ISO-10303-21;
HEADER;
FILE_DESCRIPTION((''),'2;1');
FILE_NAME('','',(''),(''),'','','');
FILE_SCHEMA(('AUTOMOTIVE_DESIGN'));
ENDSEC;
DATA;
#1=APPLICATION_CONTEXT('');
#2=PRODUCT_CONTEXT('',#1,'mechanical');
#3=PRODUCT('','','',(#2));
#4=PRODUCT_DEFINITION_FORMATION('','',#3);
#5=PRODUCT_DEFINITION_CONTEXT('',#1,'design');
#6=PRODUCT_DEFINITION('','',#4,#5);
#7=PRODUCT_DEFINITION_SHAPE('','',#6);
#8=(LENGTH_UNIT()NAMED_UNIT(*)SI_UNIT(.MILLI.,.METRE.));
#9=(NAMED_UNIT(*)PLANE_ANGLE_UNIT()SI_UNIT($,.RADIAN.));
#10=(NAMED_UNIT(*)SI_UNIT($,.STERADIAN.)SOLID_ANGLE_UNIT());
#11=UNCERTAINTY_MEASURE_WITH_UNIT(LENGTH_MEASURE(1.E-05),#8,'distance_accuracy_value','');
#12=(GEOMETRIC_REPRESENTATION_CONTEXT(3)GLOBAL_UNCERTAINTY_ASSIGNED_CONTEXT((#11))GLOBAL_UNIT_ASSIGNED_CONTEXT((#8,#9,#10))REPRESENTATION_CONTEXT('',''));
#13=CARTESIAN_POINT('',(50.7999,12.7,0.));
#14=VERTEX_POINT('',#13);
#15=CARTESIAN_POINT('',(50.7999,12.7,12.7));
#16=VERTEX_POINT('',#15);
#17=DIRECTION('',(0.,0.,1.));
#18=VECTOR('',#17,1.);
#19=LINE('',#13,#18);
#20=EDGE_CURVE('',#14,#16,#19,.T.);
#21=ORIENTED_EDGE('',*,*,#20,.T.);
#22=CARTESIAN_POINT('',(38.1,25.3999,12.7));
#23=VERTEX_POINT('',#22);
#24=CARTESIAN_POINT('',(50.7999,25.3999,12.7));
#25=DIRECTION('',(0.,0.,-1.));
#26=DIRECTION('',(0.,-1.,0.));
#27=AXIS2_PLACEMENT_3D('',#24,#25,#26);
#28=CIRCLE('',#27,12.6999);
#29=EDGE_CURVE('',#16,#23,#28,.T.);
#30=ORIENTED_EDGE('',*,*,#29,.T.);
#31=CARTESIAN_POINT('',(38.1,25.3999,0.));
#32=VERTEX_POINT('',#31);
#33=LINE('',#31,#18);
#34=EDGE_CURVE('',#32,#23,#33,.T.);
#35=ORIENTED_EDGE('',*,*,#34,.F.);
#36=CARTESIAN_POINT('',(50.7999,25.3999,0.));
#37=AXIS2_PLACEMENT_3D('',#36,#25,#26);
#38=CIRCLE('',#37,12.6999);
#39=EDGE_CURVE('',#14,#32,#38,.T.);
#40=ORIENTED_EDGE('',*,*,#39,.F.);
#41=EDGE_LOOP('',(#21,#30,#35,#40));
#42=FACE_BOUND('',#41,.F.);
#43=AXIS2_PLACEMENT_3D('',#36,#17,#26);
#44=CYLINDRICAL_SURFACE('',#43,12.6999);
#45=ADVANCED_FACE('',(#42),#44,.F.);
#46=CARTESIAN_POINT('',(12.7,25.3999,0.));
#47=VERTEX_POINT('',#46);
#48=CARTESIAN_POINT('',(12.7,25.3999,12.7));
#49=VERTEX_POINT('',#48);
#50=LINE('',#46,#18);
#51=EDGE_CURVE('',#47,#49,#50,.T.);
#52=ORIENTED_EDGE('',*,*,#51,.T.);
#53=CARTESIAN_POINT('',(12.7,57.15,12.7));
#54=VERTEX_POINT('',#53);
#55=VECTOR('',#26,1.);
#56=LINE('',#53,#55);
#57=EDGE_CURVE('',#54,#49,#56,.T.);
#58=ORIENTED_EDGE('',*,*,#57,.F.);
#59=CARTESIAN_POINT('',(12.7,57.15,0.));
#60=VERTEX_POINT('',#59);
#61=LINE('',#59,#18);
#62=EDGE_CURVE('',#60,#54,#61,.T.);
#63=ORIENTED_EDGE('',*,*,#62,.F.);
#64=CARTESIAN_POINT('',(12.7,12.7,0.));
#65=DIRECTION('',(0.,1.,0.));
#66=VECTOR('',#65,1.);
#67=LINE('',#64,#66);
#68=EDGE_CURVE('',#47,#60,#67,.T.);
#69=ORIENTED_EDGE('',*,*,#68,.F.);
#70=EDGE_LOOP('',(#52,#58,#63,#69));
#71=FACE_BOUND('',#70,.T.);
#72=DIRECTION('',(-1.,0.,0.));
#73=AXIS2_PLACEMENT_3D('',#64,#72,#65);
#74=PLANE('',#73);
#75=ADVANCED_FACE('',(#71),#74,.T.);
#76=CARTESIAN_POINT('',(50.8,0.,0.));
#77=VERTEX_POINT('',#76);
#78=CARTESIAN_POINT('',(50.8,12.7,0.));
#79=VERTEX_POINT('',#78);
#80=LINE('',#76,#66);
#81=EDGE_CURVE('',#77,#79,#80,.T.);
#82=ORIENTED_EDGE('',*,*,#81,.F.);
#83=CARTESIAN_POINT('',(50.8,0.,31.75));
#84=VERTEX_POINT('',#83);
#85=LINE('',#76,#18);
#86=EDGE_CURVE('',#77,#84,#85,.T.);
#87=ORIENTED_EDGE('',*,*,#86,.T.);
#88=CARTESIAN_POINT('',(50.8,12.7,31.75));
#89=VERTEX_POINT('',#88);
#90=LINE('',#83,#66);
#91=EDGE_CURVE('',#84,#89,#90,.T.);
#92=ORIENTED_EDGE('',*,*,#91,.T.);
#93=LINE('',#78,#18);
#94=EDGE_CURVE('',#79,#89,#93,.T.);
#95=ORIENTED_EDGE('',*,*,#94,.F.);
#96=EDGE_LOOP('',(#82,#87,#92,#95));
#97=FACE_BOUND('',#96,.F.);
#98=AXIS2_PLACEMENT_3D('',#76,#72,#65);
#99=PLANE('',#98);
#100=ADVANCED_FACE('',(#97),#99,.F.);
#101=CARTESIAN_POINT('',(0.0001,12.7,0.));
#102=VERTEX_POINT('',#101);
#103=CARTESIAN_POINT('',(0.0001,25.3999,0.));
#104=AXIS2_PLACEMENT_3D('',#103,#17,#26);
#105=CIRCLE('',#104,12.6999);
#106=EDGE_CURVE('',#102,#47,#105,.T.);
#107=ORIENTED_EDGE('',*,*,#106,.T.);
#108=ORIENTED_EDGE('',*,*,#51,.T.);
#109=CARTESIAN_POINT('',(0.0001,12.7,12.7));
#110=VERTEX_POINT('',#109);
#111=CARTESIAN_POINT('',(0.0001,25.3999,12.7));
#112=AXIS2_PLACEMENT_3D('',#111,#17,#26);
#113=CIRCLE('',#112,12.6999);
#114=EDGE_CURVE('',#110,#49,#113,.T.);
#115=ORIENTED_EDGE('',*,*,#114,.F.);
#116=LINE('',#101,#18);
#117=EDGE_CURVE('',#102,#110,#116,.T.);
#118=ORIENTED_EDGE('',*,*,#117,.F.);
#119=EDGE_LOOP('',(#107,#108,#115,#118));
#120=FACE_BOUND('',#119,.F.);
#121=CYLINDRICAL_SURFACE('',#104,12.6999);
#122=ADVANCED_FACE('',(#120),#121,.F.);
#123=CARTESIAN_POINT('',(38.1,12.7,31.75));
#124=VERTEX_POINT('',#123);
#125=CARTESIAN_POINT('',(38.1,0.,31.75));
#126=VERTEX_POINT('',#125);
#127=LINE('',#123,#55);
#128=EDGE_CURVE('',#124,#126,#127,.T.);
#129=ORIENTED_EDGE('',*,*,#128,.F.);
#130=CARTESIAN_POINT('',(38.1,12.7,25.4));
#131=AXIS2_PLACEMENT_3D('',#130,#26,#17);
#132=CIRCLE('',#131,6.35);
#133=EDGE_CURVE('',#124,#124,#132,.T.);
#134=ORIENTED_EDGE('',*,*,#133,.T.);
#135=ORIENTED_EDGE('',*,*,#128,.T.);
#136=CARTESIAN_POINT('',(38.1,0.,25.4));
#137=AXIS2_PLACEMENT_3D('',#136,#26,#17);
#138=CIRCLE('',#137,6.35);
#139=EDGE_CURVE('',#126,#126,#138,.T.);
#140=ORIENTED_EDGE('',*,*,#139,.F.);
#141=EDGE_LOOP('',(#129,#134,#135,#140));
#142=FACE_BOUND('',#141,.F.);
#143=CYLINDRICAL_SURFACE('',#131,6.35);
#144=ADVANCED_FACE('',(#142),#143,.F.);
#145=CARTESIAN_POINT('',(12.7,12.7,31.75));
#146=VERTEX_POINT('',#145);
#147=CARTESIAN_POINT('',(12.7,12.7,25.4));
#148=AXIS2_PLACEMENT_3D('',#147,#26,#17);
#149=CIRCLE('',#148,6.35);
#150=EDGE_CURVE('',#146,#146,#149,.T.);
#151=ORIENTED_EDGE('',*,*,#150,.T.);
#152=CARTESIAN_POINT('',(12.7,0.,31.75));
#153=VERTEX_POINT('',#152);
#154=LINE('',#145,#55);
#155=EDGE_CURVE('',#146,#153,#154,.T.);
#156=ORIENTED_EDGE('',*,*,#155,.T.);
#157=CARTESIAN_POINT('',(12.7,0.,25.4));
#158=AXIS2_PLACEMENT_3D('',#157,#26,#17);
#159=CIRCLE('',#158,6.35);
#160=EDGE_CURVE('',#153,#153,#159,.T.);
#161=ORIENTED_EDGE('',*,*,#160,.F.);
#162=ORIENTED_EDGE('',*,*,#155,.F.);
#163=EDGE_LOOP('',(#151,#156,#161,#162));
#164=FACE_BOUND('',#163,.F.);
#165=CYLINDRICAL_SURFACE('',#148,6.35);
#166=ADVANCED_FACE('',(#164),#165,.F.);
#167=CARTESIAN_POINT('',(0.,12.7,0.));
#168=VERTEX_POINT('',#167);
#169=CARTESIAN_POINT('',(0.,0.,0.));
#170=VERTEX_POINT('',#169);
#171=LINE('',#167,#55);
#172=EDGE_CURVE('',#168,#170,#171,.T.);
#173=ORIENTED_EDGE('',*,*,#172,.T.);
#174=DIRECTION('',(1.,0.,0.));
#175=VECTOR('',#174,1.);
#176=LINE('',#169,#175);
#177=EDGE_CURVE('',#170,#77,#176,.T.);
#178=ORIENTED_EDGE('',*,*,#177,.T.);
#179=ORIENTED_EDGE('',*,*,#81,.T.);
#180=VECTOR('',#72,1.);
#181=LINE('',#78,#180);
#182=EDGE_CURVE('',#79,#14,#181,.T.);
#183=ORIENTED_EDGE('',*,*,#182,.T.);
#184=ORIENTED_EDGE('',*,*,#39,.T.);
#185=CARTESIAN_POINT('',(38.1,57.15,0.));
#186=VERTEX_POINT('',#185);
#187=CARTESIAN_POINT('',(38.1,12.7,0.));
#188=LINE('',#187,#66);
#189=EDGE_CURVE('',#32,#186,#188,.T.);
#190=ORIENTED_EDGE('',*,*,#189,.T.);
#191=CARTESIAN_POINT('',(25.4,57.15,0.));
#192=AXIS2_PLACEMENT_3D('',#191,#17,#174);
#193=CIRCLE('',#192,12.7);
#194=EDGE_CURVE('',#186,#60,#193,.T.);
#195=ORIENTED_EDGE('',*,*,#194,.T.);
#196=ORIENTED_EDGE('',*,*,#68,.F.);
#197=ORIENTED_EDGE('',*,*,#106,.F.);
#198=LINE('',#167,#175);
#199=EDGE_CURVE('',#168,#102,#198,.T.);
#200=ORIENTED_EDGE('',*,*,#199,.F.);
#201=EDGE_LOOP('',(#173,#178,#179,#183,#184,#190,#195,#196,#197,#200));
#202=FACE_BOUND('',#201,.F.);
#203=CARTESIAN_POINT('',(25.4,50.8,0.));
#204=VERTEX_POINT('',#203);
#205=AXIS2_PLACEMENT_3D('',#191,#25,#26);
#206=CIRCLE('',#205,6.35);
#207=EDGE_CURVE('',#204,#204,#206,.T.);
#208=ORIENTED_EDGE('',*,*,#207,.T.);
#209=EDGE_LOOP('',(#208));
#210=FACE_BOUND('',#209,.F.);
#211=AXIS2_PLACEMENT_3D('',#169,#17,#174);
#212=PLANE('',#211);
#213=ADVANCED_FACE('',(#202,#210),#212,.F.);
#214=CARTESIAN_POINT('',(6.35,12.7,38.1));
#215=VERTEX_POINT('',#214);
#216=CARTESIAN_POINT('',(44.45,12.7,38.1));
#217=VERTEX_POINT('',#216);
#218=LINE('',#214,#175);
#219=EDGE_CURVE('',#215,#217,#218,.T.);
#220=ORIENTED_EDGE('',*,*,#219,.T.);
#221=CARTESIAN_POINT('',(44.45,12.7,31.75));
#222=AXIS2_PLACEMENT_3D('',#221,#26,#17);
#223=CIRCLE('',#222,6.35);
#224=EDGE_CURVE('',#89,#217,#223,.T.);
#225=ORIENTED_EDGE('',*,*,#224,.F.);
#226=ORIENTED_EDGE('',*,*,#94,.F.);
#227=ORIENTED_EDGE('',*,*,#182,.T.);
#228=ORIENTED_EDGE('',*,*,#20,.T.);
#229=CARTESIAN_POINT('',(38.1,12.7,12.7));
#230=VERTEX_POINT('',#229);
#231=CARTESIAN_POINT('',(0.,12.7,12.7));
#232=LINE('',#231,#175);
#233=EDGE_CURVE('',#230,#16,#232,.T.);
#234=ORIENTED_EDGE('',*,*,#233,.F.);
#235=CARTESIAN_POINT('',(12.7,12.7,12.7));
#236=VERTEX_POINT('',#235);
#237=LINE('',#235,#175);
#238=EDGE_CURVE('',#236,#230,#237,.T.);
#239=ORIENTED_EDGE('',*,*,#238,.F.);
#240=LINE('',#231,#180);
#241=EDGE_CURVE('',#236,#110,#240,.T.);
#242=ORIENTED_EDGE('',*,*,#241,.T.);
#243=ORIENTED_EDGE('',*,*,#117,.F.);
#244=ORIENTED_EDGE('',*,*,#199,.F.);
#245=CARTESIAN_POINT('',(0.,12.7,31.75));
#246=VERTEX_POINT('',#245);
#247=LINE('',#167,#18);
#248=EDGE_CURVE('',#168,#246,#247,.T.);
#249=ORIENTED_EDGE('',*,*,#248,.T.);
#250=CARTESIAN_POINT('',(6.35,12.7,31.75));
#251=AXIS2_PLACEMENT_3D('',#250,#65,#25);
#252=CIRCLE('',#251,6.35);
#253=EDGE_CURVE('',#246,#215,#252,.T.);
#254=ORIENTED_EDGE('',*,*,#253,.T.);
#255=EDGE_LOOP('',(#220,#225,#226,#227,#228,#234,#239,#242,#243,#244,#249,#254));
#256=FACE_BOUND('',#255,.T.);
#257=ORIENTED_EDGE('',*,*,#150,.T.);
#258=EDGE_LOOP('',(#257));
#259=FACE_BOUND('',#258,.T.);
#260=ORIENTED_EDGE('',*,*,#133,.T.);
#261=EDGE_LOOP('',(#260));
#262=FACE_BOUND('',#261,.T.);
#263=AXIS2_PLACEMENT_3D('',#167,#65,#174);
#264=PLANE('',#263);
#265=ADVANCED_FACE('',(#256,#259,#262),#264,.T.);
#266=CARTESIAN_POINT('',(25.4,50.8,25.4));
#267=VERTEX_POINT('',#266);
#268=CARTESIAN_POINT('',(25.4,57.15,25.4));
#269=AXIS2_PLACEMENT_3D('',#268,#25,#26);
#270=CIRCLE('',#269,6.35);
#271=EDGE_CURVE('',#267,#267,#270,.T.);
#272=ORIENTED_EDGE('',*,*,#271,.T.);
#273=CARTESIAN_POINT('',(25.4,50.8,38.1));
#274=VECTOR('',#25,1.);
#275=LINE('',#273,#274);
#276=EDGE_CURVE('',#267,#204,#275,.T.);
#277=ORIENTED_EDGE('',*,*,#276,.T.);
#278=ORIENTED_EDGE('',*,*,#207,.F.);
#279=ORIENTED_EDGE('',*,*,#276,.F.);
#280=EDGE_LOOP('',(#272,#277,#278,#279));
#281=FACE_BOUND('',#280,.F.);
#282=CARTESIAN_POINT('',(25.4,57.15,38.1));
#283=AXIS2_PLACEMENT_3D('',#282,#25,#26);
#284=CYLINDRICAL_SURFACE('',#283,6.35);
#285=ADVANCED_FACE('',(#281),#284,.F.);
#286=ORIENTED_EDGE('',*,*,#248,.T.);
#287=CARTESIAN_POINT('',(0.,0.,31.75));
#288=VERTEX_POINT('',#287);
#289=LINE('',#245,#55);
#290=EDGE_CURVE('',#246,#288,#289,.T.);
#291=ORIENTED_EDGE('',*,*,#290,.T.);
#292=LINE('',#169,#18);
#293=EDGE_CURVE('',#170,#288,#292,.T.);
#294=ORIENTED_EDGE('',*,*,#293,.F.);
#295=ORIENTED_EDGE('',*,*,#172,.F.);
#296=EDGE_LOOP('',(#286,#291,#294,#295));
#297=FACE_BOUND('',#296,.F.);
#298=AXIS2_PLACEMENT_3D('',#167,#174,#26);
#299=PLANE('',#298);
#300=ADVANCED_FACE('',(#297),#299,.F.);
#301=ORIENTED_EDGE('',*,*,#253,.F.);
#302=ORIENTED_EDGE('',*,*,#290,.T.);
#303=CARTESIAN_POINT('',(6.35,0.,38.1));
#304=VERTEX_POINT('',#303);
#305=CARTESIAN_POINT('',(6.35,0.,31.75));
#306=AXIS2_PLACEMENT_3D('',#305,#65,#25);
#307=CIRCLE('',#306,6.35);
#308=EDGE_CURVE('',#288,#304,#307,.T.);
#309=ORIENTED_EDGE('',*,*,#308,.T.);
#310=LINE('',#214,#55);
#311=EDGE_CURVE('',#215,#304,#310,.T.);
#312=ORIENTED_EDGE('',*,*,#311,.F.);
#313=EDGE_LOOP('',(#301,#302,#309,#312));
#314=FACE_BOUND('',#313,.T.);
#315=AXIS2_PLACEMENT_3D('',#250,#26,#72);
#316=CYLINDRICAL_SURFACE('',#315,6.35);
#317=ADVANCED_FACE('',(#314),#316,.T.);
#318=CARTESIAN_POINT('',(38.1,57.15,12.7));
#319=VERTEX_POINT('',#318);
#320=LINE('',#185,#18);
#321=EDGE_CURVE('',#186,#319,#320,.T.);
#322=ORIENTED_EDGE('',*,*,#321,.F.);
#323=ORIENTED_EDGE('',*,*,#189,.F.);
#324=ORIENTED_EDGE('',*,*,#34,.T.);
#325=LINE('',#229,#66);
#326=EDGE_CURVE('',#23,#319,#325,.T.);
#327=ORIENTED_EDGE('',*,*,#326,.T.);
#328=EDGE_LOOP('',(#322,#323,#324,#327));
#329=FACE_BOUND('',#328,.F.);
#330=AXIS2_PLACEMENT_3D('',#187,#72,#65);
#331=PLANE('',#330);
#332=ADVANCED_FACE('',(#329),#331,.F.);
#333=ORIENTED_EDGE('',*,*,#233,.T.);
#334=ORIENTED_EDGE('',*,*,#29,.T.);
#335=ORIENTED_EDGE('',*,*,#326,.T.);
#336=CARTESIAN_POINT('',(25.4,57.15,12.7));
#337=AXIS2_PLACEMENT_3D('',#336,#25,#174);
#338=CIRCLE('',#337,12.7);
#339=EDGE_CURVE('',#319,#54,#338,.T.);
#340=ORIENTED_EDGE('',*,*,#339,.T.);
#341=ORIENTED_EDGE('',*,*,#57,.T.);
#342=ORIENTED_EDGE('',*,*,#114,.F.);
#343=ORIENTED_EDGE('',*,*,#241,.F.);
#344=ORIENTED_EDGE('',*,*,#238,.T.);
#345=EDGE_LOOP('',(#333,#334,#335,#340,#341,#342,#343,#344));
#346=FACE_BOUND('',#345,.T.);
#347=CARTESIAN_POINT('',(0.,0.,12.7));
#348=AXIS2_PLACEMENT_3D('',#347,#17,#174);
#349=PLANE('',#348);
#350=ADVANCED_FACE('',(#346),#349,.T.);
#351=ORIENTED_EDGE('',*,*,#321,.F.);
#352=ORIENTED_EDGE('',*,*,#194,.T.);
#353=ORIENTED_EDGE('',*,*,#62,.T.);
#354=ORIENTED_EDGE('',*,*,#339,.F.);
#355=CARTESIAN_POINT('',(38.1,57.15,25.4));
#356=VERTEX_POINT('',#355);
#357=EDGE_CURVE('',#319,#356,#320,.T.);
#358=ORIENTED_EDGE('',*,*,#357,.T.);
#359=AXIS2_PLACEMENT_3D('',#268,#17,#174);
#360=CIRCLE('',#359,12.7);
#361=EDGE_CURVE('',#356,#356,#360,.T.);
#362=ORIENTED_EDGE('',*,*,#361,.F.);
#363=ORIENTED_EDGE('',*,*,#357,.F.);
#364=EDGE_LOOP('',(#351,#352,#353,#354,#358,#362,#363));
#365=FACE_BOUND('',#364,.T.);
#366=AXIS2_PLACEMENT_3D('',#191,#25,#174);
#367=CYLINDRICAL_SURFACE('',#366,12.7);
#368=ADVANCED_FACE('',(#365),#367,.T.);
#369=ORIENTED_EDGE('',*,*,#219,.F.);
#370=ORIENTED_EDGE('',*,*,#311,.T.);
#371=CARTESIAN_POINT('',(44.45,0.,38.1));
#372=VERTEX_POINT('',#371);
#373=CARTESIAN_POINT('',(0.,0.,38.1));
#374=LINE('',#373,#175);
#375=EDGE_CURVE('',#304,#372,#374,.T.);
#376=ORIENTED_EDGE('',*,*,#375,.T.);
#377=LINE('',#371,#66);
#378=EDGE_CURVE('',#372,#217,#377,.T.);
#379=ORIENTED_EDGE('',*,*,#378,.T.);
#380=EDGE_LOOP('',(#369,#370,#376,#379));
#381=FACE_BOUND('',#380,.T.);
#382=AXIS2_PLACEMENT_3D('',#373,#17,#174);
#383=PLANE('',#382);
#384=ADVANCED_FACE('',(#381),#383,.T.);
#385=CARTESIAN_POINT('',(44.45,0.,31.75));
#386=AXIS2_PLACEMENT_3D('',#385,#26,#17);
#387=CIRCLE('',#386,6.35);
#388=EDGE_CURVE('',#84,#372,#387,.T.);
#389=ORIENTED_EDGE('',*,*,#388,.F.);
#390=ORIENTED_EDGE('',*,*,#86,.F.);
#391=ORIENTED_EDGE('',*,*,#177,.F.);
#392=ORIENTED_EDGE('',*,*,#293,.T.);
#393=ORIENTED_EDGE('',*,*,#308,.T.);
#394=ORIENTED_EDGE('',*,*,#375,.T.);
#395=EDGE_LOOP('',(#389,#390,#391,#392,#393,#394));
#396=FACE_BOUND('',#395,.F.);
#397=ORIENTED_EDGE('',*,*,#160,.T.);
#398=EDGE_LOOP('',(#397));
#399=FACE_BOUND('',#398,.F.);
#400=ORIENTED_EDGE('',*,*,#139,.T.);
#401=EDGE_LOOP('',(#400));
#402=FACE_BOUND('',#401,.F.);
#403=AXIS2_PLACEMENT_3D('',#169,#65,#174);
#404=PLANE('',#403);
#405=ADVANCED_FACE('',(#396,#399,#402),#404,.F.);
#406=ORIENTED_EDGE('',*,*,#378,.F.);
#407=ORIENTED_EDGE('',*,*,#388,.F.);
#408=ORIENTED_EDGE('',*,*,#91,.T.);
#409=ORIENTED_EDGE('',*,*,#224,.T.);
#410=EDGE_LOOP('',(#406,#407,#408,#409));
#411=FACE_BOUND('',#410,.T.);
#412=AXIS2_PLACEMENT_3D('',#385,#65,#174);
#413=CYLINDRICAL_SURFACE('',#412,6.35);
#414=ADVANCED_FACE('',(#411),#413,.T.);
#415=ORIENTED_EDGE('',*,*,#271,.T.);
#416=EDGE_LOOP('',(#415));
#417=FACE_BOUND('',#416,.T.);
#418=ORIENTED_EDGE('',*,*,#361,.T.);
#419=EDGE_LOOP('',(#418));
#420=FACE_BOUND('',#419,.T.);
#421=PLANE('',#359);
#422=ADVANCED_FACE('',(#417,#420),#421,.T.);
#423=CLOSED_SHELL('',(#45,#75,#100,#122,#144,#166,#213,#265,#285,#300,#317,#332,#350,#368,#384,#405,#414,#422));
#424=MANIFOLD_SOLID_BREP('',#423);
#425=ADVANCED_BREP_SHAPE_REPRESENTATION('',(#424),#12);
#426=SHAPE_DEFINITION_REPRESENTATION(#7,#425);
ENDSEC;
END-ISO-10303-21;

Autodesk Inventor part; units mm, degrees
ref_plane "YZ Plane" through (0, 0, 0) normal (1, 0, 0) x (0, 1, 0)
ref_plane "XZ Plane" through (0, 0, 0) normal (0, 1, 0) x (-1, 0, 0)
ref_plane "XY Plane" through (0, 0, 0) normal (0, 0, 1) x (1, 0, 0)
sketch "Sketch1" plane through (0, 0, 0) normal (0, 0, 1) x (1, 0, 0)
  line L0 (0, 12.7) -> (0, 0)
  line L1 (0, 0) -> (50.8, 0)
  line L2 (50.8, 0) -> (50.8, 12.7)
  line L3 (0, 12.7) -> (12.7, 12.7)
  line L4 (50.8, 12.7) -> (38.1, 12.7)
  line L5 (12.7, 12.7) -> (12.7, 57.15)
  line L6 (38.1, 12.7) -> (38.1, 57.15)
  arc A0 (38.1, 57.15) -> (12.7, 57.15) centre (25.4, 57.15) ccw
  dimension "d0" = 50.8
  dimension "d1" = 12.7
  dimension "d2" = 12.7
  dimension "d3" = 12.7
  dimension "d5" = 12.7
  dimension "d6" = 44.45
extrude "Extrusion1" add sketch "Sketch1" along normal blind 38.1
fillet "Fillet1" radius 6.35 2 edges at (50.8, 6.35, 38.1) (0, 6.35, 38.1)
sketch "Sketch2" plane through (0, 0, 38.1) normal (0, 0, 1) x (1, 0, 0)
  arc A0 (12.7, 57.15) -> (38.1, 57.15) centre (25.4, 57.15) ccw
  line L0 (12.7, 57.15) -> (12.7, 12.7)
  line L1 (12.7, 57.15) -> (12.7, 12.7) projected
  line L2 (12.7, 12.7) -> (38.1, 12.7)
  line L3 (38.1, 12.7) -> (38.1, 57.15)
  point P0 (0, 0)
sketch "Sketch2 outline for Extrusion2" plane through (0, 0, 38.1) normal (0, 0, 1) x (1, 0, 0)
  arc A0 (38.1, 57.15) -> (12.7, 57.15) centre (25.4, 57.15) cw
  line L0 (38.1, 12.7) -> (38.1, 57.15)
  line L1 (12.7, 12.7) -> (38.1, 12.7)
  line L2 (12.7, 57.15) -> (12.7, 12.7)
extrude "Extrusion2" cut sketch "Sketch2 outline for Extrusion2" against normal blind 25.4
sketch "Sketch3" plane through (25.4, 57.15, 38.1) normal (0, 0, 1) x (1, 0, 0)
  circle A0 centre (0, 0) radius 12.7
  point P0 (-25.4, -57.15)
extrude "Extrusion3" cut sketch "Sketch3" against normal blind 12.7
hole "Hole1" at (25.4, 57.15, 38.1) direction (0, 0, -1) diameter 12.7 end through all
sketch "Sketch4" plane through (38.1, 12.7, 0) normal (0, 1, 0) x (1, 0, 0)
  line L0 (6.35, -38.1) -> (-31.75, -38.1) projected
  line L1 (-38.1, 0) -> (-38.1, -31.75) projected
  line L2 (12.7, 0) -> (12.7, -31.75) projected
  point P0 (-25.4, -25.4)
  point P1 (0, -25.4)
  dimension "d21" = 12.7
  dimension "d22" = 12.7
  dimension "d23" = 12.7
  dimension "d24" = 12.7
hole "Hole2" at (12.7, 12.7, 25.4) at (38.1, 12.7, 25.4) direction (0, -1, 0) diameter 12.7 end through all
fillet "Fillet2" radius 12.7 2 edges at (38.1, 12.7, 6.35) (12.7, 12.7, 6.35)
properties part number "7.1 Q5"
